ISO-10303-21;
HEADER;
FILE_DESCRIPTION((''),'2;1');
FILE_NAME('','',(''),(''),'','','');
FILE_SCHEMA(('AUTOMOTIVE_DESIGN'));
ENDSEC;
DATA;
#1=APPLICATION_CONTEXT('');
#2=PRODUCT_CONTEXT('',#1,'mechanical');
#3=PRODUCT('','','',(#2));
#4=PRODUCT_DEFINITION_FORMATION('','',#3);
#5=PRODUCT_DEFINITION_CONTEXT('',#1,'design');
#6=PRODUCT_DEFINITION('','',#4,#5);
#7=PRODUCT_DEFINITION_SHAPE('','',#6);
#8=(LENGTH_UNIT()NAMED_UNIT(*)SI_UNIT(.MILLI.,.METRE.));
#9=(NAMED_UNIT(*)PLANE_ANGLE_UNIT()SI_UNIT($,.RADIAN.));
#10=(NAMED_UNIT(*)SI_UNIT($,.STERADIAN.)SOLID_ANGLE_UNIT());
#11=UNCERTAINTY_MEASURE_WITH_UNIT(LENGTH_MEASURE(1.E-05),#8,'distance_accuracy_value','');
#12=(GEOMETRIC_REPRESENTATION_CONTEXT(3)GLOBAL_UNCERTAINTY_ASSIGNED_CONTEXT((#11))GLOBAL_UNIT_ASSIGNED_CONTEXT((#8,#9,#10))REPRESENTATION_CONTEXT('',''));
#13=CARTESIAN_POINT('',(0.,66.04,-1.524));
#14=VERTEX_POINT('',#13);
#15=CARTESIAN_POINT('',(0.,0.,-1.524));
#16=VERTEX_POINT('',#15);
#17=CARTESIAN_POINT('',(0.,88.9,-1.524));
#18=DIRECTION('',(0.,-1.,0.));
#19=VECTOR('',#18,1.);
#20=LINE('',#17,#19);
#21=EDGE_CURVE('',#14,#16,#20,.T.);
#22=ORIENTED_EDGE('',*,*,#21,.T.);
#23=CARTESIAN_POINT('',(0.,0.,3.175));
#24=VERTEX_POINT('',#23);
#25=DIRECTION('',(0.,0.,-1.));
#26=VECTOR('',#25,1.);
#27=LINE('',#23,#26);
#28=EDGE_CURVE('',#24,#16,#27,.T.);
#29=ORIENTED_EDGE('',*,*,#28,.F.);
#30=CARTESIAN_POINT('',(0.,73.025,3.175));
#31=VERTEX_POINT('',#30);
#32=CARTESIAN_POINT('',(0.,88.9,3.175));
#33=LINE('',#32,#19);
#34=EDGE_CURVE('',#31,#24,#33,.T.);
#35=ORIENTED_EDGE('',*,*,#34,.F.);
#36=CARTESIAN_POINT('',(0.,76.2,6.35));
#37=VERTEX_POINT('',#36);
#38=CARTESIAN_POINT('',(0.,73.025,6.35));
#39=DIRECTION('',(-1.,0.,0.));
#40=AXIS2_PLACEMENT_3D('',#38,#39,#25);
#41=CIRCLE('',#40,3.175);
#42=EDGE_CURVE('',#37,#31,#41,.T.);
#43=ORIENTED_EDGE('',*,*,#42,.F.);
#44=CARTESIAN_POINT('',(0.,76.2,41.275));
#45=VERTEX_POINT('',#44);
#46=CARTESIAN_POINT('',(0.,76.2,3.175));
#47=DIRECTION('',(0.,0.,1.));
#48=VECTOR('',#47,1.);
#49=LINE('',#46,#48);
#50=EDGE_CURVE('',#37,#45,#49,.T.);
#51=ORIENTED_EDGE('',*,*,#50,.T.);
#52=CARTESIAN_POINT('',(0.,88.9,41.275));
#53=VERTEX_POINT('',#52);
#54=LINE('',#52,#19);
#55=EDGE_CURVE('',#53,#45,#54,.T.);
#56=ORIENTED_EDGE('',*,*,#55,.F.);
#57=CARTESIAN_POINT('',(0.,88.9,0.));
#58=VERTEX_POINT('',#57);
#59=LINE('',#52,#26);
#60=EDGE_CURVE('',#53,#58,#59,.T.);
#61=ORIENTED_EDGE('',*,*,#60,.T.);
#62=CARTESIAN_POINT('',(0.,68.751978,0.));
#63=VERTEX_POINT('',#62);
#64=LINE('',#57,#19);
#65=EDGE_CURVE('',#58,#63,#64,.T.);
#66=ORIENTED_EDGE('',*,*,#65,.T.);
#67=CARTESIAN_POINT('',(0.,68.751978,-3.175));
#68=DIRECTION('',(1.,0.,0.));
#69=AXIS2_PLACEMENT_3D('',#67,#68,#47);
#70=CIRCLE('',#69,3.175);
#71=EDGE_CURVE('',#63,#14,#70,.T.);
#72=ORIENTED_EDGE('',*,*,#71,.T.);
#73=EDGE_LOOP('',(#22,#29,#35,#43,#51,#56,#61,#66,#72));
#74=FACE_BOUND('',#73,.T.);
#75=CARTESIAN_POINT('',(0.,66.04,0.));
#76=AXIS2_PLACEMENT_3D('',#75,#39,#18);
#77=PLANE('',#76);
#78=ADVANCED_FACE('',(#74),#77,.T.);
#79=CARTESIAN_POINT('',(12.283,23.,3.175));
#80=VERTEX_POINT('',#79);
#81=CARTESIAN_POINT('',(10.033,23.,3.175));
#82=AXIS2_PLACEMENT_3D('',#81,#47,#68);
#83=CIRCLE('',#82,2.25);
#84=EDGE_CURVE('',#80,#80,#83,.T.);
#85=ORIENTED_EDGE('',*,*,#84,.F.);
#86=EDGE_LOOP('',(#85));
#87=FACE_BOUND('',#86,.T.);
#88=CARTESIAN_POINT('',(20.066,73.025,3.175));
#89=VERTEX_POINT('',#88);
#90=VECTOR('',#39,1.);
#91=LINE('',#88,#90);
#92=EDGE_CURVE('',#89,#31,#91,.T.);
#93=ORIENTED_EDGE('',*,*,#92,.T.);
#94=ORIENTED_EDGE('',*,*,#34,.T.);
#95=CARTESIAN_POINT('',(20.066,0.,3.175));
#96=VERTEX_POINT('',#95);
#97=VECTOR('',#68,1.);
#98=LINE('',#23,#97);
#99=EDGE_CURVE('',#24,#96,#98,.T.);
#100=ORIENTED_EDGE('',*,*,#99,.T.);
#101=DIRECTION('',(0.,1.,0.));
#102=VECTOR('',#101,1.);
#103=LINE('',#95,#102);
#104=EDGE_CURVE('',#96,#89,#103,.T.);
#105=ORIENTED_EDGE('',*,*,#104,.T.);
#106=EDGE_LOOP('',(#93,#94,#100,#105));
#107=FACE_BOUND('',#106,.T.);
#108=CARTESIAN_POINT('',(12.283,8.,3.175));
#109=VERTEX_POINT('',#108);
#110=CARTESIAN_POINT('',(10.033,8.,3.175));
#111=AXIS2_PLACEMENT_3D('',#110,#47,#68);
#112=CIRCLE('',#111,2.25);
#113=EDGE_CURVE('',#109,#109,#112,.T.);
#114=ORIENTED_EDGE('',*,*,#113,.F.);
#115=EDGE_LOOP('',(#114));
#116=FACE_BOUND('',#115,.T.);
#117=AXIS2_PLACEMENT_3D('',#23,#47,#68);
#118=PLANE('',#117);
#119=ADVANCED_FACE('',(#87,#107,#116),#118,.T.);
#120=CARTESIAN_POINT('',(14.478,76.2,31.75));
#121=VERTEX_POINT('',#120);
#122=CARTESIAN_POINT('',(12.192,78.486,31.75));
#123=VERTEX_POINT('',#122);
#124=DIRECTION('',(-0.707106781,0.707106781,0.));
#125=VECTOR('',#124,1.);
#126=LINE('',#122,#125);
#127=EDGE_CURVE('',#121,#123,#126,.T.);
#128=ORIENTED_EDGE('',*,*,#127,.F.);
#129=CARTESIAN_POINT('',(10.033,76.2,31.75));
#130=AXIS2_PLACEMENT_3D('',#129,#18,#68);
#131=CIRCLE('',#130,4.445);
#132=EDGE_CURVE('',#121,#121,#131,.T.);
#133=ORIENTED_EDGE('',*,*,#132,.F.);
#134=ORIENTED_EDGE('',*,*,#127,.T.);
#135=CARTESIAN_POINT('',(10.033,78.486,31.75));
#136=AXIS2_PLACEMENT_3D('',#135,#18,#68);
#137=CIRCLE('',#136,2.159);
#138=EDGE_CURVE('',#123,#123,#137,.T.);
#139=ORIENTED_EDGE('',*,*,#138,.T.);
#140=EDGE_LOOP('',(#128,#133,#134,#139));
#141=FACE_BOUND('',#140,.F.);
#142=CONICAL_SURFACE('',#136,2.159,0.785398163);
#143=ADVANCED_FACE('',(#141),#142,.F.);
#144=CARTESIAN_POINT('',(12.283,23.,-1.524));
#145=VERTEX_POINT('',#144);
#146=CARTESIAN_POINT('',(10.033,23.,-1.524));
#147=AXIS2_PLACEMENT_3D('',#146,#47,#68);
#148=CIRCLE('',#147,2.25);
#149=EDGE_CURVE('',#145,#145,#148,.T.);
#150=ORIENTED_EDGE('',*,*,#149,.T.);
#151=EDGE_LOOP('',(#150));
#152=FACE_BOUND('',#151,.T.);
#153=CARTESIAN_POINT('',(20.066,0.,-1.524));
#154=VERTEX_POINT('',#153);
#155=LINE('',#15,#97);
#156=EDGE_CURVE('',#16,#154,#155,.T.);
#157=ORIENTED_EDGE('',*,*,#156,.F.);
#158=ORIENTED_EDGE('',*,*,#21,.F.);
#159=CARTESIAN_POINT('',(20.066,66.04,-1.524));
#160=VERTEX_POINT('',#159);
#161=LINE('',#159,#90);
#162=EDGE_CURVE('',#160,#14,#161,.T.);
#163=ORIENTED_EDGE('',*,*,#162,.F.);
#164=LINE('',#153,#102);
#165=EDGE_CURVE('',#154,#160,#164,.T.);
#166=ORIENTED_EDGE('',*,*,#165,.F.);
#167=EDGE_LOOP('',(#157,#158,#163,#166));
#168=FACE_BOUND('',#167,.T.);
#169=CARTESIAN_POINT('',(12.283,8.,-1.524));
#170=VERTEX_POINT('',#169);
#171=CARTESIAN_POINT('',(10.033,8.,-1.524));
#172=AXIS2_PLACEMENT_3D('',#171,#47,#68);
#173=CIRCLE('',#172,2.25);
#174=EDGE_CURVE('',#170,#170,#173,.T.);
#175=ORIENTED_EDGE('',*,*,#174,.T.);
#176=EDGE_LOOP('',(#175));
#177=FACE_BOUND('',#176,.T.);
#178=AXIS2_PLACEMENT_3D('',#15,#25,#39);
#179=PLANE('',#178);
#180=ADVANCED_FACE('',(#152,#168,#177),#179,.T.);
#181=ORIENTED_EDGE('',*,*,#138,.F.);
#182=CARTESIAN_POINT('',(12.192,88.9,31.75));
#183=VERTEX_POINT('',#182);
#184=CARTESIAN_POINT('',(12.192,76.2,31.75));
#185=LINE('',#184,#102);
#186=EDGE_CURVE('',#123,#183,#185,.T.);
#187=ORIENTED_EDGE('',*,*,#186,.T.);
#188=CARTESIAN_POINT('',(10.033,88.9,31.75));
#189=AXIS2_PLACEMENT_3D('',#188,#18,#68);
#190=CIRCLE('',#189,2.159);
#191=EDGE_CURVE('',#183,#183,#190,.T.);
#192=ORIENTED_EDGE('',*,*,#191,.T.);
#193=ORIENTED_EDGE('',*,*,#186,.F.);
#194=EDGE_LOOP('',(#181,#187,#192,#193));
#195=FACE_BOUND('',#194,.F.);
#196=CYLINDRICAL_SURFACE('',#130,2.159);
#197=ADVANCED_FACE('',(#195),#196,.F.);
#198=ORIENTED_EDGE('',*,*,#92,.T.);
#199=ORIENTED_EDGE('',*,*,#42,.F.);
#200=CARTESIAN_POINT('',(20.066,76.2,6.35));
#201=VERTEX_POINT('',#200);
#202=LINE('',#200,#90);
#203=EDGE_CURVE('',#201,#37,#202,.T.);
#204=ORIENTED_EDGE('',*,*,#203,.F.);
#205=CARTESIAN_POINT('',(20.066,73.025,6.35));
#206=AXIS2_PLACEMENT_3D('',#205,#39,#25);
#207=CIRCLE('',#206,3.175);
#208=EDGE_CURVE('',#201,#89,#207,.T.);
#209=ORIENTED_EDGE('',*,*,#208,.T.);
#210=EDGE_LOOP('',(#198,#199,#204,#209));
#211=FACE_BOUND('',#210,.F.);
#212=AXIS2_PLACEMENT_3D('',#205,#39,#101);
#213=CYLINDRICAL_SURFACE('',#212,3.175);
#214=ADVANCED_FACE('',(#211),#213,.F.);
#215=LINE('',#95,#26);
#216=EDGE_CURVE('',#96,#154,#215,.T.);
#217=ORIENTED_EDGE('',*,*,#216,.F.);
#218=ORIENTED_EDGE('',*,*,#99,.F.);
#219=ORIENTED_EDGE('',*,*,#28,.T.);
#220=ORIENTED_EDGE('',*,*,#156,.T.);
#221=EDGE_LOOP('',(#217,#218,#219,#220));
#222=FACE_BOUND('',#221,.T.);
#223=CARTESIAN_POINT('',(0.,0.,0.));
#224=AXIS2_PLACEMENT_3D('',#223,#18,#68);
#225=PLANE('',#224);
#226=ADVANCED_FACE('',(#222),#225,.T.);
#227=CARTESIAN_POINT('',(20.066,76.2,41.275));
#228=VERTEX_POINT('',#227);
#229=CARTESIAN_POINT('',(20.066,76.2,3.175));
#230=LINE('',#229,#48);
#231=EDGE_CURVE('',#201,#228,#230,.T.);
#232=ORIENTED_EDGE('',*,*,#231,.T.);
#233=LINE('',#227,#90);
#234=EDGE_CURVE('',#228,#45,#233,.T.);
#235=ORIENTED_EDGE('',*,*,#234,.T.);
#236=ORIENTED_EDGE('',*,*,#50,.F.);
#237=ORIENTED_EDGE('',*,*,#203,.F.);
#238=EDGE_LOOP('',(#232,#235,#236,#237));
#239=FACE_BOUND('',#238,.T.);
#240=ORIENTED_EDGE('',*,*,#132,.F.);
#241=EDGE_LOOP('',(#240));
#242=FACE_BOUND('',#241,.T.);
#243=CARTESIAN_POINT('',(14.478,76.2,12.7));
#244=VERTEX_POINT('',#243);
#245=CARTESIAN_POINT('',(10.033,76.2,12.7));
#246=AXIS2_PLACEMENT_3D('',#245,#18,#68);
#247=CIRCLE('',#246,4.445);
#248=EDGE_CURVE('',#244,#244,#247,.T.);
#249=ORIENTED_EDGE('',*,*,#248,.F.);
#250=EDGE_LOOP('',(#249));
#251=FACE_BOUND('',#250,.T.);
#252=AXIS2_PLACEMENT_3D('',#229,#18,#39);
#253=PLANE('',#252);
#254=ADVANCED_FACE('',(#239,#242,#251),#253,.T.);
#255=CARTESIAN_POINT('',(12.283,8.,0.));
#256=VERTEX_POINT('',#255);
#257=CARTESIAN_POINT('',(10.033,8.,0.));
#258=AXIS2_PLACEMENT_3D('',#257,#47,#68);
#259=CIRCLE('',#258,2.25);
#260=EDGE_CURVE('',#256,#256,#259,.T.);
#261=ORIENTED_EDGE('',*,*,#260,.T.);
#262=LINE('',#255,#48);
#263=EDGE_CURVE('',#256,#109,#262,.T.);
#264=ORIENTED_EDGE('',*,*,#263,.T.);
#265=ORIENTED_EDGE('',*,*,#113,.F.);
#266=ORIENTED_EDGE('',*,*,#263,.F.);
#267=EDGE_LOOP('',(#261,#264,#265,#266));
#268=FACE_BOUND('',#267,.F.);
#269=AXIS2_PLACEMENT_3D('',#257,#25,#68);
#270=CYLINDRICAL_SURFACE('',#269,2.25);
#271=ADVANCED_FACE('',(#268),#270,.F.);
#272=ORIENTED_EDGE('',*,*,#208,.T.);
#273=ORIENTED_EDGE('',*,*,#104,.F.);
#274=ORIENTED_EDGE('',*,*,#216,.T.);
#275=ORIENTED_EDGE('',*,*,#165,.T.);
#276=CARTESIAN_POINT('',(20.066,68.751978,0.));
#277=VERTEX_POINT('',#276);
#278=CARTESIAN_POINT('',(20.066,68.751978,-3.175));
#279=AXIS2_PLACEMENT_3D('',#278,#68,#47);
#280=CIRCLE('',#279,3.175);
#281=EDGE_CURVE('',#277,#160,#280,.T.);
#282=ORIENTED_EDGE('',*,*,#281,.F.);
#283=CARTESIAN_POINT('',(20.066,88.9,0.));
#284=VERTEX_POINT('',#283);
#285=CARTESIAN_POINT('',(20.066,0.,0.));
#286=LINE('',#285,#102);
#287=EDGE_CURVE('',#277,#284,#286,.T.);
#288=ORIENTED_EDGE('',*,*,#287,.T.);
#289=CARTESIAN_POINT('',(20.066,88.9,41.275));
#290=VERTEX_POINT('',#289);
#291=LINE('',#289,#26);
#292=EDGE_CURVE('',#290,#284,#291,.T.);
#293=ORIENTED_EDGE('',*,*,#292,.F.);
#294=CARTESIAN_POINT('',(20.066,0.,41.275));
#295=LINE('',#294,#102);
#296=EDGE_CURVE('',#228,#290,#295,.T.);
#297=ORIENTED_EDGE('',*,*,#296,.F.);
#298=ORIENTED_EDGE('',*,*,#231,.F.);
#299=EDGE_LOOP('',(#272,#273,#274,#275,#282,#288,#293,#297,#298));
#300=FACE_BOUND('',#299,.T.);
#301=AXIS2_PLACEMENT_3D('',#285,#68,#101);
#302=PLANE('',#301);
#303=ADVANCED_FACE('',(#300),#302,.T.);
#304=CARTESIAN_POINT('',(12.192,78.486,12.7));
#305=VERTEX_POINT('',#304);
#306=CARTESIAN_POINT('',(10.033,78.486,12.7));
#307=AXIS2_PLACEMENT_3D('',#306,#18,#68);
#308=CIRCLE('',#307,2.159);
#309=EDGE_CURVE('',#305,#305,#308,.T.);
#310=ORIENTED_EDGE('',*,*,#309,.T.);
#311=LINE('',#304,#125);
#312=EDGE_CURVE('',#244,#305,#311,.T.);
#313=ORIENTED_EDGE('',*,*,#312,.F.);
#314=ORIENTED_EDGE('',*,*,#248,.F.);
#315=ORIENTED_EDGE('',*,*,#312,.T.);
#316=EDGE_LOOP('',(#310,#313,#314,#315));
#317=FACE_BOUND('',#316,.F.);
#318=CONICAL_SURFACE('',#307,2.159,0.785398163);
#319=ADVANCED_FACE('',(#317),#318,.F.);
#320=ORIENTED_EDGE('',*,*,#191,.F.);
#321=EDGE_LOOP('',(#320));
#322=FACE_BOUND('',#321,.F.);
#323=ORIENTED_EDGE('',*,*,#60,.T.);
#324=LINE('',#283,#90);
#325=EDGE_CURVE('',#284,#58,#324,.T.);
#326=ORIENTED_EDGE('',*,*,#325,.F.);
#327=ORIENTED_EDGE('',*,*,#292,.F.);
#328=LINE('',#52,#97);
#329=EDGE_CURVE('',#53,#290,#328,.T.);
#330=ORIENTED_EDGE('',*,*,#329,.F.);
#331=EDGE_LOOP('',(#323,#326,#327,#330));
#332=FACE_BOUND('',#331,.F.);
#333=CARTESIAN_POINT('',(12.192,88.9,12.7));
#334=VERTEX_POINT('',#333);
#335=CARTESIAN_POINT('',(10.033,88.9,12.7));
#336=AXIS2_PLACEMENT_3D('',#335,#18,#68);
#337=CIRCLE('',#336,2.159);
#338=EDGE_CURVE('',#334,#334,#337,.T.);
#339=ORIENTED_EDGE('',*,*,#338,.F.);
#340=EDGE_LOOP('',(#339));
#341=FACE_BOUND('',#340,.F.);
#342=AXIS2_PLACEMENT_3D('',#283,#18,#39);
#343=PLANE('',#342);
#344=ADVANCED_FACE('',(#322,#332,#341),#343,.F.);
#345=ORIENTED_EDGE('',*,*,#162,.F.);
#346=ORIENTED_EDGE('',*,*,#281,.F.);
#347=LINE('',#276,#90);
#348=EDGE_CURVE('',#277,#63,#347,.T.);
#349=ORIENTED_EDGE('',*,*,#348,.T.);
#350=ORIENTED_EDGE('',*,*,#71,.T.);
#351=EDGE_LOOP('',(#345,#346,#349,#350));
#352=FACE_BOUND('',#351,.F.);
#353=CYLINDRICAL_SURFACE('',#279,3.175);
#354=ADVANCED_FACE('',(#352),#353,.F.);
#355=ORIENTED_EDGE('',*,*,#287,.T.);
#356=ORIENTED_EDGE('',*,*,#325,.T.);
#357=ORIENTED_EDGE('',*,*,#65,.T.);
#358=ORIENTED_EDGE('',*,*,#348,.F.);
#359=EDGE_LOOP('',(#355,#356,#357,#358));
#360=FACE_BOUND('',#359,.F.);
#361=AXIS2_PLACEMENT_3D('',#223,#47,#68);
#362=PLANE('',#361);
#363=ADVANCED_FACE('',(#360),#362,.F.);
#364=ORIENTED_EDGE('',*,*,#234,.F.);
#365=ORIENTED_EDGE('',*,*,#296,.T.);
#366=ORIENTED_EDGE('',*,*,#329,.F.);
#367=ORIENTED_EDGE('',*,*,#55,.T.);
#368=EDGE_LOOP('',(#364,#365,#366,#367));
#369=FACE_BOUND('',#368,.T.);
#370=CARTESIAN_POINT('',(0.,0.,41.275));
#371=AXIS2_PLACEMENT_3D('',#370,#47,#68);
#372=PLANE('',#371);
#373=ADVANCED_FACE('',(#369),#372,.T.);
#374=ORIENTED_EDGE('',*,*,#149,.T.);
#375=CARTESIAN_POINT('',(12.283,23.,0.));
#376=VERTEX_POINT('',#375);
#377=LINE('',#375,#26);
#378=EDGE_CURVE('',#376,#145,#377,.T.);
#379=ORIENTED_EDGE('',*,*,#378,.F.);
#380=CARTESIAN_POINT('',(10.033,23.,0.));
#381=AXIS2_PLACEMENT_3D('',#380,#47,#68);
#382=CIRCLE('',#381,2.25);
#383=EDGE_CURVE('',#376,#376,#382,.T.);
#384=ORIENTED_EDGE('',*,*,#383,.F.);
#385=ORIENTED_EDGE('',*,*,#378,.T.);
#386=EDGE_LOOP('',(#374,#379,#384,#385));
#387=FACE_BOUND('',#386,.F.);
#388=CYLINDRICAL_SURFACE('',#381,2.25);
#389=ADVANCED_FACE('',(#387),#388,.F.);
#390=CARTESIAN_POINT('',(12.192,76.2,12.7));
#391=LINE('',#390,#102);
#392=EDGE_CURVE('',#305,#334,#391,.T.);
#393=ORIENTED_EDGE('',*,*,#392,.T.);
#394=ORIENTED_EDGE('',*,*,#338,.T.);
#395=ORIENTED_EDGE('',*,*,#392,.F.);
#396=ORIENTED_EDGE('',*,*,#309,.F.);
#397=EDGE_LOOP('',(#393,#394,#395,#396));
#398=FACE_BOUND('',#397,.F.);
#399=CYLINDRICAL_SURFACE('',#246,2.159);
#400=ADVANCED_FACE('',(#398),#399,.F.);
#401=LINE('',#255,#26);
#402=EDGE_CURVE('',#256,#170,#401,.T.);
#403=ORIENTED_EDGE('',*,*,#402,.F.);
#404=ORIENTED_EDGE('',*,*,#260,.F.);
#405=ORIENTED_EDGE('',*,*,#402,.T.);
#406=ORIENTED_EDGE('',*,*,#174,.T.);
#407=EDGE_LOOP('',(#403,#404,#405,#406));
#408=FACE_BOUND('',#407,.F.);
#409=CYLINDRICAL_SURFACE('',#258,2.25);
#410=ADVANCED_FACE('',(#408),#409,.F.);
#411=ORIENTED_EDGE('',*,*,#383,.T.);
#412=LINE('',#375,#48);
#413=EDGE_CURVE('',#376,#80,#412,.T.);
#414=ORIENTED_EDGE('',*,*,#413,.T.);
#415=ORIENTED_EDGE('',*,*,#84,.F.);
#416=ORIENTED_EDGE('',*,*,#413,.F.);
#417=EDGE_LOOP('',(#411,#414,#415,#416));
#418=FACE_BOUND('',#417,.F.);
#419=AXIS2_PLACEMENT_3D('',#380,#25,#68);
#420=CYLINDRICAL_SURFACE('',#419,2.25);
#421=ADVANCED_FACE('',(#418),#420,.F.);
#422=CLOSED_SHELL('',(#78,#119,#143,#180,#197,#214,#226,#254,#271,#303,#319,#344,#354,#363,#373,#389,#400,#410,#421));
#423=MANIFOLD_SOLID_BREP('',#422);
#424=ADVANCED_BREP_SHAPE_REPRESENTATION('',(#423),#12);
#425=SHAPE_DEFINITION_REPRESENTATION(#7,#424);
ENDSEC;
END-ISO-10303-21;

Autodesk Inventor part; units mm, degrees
ref_plane "YZ Plane" through (0, 0, 0) normal (1, 0, 0) x (0, 1, 0)
ref_plane "XZ Plane" through (0, 0, 0) normal (0, 1, 0) x (-1, 0, 0)
ref_plane "XY Plane" through (0, 0, 0) normal (0, 0, 1) x (1, 0, 0)
sketch "Sketch1" plane through (0, 0, 0) normal (0, 0, 1) x (1, 0, 0)
  line L0 (0, 0) -> (20.066, 0)
  line L1 (20.066, 0) -> (20.066, 88.9)
  line L2 (20.066, 88.9) -> (0, 88.9)
  line L3 (0, 88.9) -> (0, 0)
  circle A0 centre (10.033, 8) radius 2.25
  circle A1 centre (10.033, 23) radius 2.25
  dimension "d0" = 20.066
  dimension "d1" = 88.9
  dimension "d10" = 8
  dimension "d11" = 15
  dimension "d12" = 4.5
  dimension "d13" = 4.5
extrude "Extrusion1" add sketch "Sketch1" along normal blind 3.175
sketch "Sketch2" plane through (0, 0, 3.175) normal (0, 0, 1) x (1, 0, 0)
  line L0 (0, 88.9) -> (0, 0) projected
  line L1 (20.066, 0) -> (20.066, 88.9) projected
  line L2 (0, 88.9) -> (20.066, 88.9)
  line L3 (20.066, 88.9) -> (20.066, 76.2)
  line L4 (20.066, 76.2) -> (0, 76.2)
  line L5 (0, 76.2) -> (0, 88.9)
  point P0 (0, 76.2)
  dimension "d4" = 12.7
extrude "Extrusion2" add sketch "Sketch2" along normal blind 38.1
sketch "Sketch3" plane through (0, 0, 0) normal (0, 0, -1) x (-1, 0, 0)
  line L0 (-20.066, 0) -> (-20.066, 88.9) projected
  line L1 (0, 0) -> (-20.066, 0) projected
  line L2 (0, 88.9) -> (0, 0) projected
  line L3 (-20.066, 88.9) -> (0, 88.9) projected
  line L4 (-20.066, 66.04) -> (0, 66.04)
  line L5 (0, 66.04) -> (0, 0)
  line L6 (0, 0) -> (-20.066, 0)
  line L7 (-20.066, 0) -> (-20.066, 66.04)
  point P0 (0, 66.04)
  dimension "d7" = 22.86
extrude "Extrusion3" add sketch "Sketch3" along normal blind 1.524 contours L0 L4 L2 L1
sketch "Sketch4" plane through (10.033, 23, 0) normal (0, 0, 1) x (1, 0, 0)
  circle A0 centre (0, -15) radius 2.25 projected
  circle A1 centre (0, 0) radius 2.25 projected
  point P0 (-10.033, -23)
extrude "Extrusion4" cut sketch "Sketch4" against normal blind 3.175
sketch "Sketch5" plane through (0, 76.2, 3.175) normal (0, -1, 0) x (1, 0, 0)
  line L0 (20.066, 0) -> (0, 0) projected
  line L1 (20.066, 0) -> (20.066, 38.1) projected
  line L2 (0, 38.1) -> (20.066, 38.1) projected
  line L3 (0, 0) -> (0, 38.1) projected
  circle A0 centre (10.033, 28.575) radius 2.159
  circle A1 centre (10.033, 9.525) radius 2.159
  point P0 (0, -3.175)
  point P1 (10.033, 38.1)
  dimension "d16" = 4.318
  dimension "d17" = 4.318
  dimension "d18" = 9.525
  dimension "d19" = 9.525
extrude "Extrusion5" cut sketch "Sketch5" against normal through all contours A0 | A1
fillet "Fillet1" radius 3.175 1 edges at (10.033, 76.2, 3.175)
chamfer "Chamfer1" distance 2.286 angle 45 2 edges at (7.874, 76.2, 31.75) (7.874, 76.2, 12.7)
fillet "Fillet2" radius 3.175 1 edges at (10.033, 66.04, 0)
properties part number "Tensioner Mount V1_3DPrint"
